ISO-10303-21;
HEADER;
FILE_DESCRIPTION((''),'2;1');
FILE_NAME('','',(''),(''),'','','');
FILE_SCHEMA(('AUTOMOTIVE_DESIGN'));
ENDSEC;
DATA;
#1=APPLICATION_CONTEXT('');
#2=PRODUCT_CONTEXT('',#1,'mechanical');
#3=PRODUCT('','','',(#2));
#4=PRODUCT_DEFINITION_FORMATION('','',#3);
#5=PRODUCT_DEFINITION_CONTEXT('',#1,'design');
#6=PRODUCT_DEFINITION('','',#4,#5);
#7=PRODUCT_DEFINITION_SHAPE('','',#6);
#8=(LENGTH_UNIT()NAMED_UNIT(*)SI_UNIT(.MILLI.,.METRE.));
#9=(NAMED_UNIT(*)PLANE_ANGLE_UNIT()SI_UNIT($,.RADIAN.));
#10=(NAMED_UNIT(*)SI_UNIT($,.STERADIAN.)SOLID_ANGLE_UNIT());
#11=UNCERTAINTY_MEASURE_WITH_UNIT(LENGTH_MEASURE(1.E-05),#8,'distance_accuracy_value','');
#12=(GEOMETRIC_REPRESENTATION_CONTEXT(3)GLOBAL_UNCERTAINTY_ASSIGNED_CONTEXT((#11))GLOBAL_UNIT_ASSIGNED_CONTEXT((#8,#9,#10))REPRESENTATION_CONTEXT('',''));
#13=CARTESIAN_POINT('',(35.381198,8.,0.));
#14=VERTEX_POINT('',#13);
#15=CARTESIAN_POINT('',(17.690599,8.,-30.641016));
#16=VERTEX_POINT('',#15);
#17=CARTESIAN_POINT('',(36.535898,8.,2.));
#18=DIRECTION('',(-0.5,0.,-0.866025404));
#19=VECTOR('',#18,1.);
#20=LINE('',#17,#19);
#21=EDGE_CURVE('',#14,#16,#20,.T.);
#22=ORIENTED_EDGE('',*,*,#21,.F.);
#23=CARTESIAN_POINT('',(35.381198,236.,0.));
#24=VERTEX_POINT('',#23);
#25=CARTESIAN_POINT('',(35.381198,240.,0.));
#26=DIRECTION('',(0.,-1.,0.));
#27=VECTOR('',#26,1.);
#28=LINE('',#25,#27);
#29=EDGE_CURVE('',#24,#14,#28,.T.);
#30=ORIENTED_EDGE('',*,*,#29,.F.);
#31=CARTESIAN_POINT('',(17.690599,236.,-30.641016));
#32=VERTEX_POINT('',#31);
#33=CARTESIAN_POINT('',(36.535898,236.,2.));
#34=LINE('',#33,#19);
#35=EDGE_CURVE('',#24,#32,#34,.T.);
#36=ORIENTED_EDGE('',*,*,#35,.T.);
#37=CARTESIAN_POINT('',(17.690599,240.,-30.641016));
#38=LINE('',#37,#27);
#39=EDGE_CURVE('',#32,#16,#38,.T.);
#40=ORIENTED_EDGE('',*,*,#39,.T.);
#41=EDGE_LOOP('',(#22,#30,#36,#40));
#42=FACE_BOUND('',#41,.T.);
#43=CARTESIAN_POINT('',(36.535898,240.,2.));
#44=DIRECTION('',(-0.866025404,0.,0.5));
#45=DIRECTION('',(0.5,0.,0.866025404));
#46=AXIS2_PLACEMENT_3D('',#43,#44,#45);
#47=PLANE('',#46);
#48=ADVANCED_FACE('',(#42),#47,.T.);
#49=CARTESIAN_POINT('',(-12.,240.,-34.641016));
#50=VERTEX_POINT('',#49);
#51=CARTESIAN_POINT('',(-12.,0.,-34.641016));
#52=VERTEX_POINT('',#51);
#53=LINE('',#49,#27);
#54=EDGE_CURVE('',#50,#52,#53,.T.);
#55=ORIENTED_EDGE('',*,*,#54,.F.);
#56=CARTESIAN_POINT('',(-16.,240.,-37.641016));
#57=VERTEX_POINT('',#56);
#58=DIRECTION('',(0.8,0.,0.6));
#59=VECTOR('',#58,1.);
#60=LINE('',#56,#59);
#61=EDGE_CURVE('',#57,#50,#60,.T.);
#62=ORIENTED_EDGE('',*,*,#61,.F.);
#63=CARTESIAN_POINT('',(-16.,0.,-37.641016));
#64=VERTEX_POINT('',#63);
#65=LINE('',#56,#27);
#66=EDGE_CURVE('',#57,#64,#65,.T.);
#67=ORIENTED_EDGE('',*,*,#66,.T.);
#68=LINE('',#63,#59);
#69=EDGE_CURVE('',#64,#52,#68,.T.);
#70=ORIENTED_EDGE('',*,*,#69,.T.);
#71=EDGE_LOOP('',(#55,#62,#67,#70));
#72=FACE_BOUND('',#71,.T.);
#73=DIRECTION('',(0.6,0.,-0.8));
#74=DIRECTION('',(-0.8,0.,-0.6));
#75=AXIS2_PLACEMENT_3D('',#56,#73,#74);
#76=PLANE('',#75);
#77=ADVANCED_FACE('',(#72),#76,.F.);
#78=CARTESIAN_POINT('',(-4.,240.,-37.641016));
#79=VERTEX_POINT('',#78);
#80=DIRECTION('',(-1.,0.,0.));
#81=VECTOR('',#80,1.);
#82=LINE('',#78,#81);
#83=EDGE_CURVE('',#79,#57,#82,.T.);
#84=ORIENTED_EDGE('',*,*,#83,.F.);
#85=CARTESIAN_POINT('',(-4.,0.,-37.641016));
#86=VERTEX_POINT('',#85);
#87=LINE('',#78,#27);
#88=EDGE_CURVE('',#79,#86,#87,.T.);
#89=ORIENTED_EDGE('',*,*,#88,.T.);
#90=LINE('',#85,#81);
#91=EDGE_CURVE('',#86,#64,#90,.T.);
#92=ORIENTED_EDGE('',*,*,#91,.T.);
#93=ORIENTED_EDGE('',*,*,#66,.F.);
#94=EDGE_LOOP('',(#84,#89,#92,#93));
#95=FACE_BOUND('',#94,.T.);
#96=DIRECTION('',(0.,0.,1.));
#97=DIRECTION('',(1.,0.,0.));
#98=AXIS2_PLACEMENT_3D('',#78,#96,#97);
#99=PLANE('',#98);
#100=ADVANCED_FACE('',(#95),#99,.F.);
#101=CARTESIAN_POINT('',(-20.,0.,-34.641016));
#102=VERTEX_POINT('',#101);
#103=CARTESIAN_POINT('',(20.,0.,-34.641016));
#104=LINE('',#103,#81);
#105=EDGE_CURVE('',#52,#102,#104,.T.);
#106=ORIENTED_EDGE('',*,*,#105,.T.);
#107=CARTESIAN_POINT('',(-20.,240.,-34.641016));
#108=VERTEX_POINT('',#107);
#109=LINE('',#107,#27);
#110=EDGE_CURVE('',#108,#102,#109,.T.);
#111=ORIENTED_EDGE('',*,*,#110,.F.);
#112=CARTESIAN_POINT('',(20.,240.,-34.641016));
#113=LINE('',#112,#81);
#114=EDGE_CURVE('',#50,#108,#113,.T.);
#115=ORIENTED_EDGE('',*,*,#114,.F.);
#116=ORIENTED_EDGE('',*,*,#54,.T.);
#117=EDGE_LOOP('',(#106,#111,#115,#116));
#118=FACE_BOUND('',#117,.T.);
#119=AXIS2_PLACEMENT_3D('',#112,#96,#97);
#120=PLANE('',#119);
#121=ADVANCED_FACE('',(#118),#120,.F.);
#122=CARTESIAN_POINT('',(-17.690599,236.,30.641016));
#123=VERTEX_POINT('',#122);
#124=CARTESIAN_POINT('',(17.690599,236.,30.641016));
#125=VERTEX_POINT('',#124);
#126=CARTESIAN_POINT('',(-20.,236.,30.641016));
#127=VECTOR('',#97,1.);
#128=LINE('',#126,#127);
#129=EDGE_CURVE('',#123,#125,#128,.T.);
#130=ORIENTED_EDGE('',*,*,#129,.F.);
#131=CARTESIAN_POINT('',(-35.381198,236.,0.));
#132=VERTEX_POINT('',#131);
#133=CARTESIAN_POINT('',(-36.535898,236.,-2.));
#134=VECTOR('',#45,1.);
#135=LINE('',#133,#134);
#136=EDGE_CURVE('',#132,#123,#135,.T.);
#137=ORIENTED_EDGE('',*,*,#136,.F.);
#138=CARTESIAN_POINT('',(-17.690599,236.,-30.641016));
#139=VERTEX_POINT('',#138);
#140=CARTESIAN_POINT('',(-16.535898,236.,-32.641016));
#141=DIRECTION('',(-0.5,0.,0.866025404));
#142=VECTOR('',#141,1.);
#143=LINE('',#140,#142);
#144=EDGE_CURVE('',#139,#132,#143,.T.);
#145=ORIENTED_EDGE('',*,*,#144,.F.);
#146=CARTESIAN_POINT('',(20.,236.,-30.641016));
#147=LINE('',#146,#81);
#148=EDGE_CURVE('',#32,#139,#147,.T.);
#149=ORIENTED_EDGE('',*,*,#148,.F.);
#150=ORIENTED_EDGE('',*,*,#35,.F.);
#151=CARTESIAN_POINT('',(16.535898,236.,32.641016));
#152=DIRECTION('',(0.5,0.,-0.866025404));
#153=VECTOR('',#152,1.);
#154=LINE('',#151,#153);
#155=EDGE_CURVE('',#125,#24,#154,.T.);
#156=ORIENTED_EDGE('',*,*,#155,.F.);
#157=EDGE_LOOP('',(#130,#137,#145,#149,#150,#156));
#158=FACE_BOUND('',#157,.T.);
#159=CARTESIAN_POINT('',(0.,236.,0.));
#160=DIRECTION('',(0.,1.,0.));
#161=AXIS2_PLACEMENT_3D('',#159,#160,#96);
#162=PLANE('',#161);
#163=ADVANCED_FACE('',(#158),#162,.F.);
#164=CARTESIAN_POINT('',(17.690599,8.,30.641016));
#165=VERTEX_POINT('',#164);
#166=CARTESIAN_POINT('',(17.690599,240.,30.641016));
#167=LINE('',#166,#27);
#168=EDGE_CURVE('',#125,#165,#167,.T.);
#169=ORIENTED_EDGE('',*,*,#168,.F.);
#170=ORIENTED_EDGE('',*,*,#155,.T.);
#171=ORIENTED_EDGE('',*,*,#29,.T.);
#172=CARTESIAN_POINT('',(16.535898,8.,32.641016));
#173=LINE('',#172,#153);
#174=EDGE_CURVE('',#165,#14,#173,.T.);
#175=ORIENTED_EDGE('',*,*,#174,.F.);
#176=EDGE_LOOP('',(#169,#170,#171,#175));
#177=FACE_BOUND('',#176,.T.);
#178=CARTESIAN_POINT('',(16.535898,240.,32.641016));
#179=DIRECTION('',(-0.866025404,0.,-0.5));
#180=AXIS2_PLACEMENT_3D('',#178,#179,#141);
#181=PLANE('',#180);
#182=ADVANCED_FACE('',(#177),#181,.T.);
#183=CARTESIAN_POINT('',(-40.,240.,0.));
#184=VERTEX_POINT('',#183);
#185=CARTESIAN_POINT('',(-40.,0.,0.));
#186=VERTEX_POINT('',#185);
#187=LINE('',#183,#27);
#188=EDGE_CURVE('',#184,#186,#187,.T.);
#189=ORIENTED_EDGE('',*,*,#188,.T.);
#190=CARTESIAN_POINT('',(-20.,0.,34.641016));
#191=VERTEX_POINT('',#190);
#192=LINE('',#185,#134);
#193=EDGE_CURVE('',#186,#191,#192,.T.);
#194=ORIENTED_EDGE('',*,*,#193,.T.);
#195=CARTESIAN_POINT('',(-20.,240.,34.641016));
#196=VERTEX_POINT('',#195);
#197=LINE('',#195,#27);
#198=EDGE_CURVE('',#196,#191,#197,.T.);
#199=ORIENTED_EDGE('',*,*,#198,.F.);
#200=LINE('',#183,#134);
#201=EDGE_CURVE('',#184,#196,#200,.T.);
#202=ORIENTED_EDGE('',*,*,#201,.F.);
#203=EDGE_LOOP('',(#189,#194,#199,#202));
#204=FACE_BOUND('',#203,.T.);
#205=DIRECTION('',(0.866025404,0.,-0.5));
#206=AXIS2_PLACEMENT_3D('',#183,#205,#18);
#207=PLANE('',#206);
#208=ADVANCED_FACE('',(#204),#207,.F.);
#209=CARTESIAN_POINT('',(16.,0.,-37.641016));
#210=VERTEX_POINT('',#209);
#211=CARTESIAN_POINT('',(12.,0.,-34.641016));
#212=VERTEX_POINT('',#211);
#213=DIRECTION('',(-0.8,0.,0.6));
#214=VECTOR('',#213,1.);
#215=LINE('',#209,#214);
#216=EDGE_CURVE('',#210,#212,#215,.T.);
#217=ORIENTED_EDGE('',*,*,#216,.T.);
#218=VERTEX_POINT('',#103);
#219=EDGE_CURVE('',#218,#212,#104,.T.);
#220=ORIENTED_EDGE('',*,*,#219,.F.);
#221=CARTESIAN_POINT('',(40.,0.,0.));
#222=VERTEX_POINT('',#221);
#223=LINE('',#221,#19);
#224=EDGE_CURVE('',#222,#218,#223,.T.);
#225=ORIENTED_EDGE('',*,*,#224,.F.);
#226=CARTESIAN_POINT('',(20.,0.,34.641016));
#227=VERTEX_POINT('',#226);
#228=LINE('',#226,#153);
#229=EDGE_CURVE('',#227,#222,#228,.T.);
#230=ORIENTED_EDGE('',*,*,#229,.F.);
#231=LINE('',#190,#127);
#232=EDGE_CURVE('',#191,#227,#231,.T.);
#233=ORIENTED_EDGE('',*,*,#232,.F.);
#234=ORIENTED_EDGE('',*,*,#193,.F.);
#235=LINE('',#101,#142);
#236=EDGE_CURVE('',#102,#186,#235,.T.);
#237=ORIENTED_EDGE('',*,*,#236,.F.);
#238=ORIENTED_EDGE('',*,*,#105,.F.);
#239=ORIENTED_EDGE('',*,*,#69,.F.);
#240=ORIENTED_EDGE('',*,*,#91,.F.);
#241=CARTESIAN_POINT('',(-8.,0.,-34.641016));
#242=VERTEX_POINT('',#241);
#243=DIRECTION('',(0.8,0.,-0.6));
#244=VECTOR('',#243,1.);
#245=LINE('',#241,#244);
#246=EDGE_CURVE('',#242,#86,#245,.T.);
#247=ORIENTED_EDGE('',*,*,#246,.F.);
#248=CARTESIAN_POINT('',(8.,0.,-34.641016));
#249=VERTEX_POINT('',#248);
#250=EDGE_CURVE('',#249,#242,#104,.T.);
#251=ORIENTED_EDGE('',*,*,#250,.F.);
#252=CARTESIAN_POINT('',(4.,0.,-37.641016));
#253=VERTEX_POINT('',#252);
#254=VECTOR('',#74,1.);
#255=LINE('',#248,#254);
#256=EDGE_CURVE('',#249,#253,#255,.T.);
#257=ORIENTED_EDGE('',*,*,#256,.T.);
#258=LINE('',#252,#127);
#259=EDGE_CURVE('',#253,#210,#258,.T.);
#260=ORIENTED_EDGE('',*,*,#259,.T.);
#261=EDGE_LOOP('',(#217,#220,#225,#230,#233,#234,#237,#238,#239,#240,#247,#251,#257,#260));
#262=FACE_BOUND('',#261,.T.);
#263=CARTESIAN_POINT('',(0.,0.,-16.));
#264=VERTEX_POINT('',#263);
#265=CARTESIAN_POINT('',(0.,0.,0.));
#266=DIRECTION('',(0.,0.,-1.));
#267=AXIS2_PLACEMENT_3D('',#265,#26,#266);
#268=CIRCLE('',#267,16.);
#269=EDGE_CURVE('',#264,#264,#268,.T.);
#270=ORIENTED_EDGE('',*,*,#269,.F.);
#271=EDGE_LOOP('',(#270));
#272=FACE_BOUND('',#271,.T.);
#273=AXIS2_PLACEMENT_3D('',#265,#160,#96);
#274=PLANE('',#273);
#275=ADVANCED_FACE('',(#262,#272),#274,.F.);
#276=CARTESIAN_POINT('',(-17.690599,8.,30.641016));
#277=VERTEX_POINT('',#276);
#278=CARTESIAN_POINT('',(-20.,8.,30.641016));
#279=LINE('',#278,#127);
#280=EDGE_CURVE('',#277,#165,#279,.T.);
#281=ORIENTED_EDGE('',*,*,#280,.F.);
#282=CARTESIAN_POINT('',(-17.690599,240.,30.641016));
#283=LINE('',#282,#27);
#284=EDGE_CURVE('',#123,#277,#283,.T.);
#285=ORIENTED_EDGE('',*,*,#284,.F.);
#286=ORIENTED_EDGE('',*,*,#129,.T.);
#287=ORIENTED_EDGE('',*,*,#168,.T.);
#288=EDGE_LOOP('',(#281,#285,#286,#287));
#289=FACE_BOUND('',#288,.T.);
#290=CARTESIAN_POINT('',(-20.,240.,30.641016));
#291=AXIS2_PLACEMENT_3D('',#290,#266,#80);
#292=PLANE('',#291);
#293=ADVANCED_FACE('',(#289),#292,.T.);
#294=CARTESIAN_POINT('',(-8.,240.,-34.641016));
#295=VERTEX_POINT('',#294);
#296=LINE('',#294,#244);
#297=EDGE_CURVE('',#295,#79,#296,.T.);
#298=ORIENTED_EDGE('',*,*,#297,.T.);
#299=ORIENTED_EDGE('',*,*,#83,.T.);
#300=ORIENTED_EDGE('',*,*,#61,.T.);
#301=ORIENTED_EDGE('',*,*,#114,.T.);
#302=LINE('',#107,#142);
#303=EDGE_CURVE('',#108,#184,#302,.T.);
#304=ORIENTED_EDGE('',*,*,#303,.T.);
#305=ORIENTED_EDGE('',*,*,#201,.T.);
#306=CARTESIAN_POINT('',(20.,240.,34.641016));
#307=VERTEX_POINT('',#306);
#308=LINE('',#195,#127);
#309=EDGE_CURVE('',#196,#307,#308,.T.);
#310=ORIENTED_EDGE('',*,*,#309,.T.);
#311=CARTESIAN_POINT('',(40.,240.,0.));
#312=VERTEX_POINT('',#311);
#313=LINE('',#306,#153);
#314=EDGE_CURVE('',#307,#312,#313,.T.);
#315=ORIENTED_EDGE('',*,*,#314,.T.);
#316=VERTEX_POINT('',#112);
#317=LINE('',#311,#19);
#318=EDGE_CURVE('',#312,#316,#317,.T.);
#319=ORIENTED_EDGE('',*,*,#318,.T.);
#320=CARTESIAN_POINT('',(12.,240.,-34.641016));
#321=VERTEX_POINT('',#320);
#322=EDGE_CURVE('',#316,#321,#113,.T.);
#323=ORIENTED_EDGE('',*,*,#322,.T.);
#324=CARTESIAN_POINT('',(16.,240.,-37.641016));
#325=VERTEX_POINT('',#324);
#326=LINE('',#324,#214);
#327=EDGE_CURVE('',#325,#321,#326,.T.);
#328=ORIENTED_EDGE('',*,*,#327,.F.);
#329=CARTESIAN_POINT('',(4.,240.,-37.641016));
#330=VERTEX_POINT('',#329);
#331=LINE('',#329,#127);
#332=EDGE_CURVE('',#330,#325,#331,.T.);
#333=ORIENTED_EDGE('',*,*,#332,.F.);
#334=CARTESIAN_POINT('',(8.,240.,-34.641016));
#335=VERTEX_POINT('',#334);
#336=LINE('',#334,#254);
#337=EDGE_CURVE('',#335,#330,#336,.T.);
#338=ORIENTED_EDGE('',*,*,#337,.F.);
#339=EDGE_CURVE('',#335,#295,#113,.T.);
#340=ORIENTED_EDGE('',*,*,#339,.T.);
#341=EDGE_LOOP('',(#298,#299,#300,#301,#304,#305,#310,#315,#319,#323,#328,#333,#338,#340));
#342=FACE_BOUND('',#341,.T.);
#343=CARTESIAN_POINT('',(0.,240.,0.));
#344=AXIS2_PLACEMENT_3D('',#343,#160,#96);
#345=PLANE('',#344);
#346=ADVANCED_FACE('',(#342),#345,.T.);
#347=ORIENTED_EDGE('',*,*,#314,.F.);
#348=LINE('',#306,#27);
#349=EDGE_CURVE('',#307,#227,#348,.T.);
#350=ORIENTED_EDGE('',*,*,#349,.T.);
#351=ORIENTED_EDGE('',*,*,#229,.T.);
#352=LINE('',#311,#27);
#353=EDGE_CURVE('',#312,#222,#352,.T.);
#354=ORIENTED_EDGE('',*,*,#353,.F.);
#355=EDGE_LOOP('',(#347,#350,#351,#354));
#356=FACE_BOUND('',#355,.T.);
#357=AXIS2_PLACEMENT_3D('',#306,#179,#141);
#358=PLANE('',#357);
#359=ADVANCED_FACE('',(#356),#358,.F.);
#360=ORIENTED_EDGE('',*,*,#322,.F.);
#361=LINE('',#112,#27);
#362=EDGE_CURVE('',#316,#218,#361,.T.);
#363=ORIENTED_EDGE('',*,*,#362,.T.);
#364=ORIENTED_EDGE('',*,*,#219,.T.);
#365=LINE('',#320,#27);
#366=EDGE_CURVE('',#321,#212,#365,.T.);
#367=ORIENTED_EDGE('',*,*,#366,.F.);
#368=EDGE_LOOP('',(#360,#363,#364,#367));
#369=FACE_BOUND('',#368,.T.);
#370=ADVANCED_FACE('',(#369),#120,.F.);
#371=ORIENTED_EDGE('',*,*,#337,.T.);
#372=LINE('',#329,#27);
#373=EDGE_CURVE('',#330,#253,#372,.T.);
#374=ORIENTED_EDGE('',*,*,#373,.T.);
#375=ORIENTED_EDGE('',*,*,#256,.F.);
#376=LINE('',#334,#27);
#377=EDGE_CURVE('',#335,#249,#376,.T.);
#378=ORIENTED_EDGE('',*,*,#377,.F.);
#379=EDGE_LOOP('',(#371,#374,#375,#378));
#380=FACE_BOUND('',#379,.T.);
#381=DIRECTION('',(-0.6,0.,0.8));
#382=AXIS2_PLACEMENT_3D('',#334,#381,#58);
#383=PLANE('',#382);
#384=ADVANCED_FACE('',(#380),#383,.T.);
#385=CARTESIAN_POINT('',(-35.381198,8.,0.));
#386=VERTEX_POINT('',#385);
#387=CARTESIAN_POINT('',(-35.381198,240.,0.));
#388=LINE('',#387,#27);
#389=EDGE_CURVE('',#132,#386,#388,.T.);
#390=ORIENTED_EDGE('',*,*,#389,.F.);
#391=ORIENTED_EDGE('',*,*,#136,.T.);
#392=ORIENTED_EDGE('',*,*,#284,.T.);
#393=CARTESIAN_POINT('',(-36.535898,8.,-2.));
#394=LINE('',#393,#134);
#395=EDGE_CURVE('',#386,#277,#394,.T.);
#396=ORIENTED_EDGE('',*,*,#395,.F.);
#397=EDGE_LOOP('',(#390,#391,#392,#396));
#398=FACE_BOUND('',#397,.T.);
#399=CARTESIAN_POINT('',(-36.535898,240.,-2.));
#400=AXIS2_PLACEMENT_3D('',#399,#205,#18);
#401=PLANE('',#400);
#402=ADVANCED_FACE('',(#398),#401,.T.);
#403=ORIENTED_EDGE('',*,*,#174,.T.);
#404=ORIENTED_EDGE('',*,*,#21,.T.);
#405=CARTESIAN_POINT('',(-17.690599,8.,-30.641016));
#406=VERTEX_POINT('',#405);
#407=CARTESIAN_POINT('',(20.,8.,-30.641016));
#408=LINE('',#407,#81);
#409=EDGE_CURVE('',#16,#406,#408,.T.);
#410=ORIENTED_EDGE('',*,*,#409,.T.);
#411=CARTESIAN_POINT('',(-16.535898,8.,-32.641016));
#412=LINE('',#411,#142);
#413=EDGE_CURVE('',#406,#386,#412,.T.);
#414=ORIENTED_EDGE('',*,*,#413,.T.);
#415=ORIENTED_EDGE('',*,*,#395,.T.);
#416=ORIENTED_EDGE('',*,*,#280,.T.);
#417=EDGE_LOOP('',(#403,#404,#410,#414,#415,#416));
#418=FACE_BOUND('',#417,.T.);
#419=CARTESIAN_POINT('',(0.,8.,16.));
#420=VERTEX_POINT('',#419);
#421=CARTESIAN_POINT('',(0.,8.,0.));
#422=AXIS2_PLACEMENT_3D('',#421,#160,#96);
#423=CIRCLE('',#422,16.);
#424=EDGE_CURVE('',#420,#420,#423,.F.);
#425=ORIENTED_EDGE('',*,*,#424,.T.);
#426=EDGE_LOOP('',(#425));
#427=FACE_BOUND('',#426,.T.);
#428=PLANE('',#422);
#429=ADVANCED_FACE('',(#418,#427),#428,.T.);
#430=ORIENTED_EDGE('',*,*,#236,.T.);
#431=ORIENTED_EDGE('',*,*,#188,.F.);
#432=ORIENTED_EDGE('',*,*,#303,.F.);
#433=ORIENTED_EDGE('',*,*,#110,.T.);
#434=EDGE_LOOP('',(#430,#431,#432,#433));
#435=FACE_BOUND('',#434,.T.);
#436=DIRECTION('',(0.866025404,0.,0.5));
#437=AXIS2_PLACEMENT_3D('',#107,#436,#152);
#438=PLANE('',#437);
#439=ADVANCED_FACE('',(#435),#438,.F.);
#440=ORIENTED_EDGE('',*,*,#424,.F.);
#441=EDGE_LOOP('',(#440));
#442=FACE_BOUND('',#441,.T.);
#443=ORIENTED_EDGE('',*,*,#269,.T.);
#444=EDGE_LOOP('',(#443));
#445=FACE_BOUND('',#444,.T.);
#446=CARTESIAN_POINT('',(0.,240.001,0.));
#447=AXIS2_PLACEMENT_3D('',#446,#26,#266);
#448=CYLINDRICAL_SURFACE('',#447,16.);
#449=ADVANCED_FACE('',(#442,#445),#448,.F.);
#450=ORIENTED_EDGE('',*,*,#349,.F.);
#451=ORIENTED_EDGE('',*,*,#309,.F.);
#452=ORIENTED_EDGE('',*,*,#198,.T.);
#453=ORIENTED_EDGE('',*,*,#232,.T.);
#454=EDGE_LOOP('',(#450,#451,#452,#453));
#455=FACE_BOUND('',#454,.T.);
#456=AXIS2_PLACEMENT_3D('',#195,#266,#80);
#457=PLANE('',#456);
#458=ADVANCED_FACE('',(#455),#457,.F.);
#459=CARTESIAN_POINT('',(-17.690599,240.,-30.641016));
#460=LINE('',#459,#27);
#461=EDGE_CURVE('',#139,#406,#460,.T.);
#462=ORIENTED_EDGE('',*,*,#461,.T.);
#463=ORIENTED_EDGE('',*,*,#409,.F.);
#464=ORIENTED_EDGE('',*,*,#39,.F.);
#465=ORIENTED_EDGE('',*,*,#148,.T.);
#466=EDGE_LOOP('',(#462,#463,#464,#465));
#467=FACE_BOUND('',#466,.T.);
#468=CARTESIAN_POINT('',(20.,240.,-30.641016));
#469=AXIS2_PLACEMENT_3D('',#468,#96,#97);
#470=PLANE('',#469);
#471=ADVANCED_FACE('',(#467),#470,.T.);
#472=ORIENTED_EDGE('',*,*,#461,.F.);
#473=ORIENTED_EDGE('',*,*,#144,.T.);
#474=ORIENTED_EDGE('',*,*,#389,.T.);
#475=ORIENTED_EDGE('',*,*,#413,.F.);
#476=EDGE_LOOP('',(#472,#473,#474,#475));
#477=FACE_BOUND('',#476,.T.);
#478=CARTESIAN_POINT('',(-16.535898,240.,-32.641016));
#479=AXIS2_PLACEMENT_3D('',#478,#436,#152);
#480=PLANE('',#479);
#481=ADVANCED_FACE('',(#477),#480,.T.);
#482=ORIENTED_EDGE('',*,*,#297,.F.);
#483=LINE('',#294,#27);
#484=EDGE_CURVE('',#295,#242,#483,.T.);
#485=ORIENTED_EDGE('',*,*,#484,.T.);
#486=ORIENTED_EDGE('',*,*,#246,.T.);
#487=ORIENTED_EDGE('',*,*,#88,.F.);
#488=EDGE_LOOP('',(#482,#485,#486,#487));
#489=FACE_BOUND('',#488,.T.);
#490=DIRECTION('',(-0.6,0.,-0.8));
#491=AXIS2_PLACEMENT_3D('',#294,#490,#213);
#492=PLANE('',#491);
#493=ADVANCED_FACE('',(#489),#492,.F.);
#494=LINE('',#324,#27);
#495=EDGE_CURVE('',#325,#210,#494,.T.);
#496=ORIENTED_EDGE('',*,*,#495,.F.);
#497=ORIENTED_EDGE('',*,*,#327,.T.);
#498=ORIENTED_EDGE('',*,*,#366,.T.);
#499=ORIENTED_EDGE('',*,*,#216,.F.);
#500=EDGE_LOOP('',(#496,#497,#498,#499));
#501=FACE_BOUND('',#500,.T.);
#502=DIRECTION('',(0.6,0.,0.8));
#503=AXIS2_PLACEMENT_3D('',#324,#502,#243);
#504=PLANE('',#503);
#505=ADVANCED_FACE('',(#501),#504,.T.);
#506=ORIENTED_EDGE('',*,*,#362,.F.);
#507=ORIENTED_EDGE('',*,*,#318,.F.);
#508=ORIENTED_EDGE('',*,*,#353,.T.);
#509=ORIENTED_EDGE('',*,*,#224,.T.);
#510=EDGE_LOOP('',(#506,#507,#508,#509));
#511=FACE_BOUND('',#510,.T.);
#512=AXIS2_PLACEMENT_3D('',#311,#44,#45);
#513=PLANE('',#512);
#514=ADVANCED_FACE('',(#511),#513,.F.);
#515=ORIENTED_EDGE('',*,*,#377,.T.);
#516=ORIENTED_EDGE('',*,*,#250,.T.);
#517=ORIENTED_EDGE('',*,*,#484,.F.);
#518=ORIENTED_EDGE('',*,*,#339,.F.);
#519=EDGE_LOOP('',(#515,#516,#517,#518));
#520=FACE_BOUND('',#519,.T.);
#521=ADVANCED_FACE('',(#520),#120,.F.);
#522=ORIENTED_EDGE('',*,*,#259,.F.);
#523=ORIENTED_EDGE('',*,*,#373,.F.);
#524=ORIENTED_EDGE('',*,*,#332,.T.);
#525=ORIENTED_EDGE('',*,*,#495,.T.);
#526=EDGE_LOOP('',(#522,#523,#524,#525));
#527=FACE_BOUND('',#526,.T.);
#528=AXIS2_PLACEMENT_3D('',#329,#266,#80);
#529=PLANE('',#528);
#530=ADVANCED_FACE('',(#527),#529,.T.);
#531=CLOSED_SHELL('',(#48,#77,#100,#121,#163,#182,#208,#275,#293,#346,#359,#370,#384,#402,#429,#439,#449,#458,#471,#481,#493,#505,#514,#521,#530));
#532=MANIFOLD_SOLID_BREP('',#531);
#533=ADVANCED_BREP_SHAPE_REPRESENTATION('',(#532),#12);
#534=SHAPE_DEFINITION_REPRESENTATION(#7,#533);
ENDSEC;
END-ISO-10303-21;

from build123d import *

# Parameters (mm, degrees)
BOSS_EXTRUDE1_DEPTH = 240
SHELL1_START        = 8
SHELL1_DEPTH        = 228
CUT_EXTRUDE1_REACH  = 248.205
SKETCH2_R           = 16


# Read off the part's stored shape, not the designer's step: Shell1
with BuildPart() as part:
    # Sketch1 → Boss-Extrude1 (new body)
    with BuildSketch(Plane(origin=(0, 0, 0), x_dir=(1, 0, 0), z_dir=(0, 1, 0))):
        Polygon((40, 0), (20, 34.641016151), (-20, 34.641016151), (-40, 0), (-20, -34.641016151), (20, -34.641016151), align=None)
        Polygon((-12, 34.641016151), (-8, 34.641016151), (-4, 37.641016151), (-16, 37.641016151), align=None)
        Polygon((4, 37.641016151), (16, 37.641016151), (12, 34.641016151), (8, 34.641016151), align=None)
    extrude(amount=BOSS_EXTRUDE1_DEPTH)

    # Shell1 outline → Shell1 (cut)
    with BuildSketch(Plane(origin=(0, 0, 0), x_dir=(1, 0, 0), z_dir=(0, 1, 0)).offset(SHELL1_START)):
        Polygon((-17.690598923, -30.641016151), (17.690598923, -30.641016151), (35.381197846, 0), (17.690598923, 30.641016151), (-17.690598923, 30.641016151), (-35.381197846, 0), align=None)
    extrude(amount=SHELL1_DEPTH, mode=Mode.SUBTRACT)

    # Sketch2 → Cut-Extrude1 (cut, up to next)
    with BuildSketch(Plane.XZ, mode=Mode.PRIVATE) as cut_extrude1_sk1:
        with Locations(Location((0, 0, 0), (0, 0, 270))):
            Circle(SKETCH2_R)
    cut_extrude1_tool1 = extrude(cut_extrude1_sk1.sketch, amount=-CUT_EXTRUDE1_REACH, mode=Mode.PRIVATE) & part.part
    add(cut_extrude1_tool1.solids().sort_by_distance((0, 0, 0))[0], mode=Mode.SUBTRACT)


solid = part.part
